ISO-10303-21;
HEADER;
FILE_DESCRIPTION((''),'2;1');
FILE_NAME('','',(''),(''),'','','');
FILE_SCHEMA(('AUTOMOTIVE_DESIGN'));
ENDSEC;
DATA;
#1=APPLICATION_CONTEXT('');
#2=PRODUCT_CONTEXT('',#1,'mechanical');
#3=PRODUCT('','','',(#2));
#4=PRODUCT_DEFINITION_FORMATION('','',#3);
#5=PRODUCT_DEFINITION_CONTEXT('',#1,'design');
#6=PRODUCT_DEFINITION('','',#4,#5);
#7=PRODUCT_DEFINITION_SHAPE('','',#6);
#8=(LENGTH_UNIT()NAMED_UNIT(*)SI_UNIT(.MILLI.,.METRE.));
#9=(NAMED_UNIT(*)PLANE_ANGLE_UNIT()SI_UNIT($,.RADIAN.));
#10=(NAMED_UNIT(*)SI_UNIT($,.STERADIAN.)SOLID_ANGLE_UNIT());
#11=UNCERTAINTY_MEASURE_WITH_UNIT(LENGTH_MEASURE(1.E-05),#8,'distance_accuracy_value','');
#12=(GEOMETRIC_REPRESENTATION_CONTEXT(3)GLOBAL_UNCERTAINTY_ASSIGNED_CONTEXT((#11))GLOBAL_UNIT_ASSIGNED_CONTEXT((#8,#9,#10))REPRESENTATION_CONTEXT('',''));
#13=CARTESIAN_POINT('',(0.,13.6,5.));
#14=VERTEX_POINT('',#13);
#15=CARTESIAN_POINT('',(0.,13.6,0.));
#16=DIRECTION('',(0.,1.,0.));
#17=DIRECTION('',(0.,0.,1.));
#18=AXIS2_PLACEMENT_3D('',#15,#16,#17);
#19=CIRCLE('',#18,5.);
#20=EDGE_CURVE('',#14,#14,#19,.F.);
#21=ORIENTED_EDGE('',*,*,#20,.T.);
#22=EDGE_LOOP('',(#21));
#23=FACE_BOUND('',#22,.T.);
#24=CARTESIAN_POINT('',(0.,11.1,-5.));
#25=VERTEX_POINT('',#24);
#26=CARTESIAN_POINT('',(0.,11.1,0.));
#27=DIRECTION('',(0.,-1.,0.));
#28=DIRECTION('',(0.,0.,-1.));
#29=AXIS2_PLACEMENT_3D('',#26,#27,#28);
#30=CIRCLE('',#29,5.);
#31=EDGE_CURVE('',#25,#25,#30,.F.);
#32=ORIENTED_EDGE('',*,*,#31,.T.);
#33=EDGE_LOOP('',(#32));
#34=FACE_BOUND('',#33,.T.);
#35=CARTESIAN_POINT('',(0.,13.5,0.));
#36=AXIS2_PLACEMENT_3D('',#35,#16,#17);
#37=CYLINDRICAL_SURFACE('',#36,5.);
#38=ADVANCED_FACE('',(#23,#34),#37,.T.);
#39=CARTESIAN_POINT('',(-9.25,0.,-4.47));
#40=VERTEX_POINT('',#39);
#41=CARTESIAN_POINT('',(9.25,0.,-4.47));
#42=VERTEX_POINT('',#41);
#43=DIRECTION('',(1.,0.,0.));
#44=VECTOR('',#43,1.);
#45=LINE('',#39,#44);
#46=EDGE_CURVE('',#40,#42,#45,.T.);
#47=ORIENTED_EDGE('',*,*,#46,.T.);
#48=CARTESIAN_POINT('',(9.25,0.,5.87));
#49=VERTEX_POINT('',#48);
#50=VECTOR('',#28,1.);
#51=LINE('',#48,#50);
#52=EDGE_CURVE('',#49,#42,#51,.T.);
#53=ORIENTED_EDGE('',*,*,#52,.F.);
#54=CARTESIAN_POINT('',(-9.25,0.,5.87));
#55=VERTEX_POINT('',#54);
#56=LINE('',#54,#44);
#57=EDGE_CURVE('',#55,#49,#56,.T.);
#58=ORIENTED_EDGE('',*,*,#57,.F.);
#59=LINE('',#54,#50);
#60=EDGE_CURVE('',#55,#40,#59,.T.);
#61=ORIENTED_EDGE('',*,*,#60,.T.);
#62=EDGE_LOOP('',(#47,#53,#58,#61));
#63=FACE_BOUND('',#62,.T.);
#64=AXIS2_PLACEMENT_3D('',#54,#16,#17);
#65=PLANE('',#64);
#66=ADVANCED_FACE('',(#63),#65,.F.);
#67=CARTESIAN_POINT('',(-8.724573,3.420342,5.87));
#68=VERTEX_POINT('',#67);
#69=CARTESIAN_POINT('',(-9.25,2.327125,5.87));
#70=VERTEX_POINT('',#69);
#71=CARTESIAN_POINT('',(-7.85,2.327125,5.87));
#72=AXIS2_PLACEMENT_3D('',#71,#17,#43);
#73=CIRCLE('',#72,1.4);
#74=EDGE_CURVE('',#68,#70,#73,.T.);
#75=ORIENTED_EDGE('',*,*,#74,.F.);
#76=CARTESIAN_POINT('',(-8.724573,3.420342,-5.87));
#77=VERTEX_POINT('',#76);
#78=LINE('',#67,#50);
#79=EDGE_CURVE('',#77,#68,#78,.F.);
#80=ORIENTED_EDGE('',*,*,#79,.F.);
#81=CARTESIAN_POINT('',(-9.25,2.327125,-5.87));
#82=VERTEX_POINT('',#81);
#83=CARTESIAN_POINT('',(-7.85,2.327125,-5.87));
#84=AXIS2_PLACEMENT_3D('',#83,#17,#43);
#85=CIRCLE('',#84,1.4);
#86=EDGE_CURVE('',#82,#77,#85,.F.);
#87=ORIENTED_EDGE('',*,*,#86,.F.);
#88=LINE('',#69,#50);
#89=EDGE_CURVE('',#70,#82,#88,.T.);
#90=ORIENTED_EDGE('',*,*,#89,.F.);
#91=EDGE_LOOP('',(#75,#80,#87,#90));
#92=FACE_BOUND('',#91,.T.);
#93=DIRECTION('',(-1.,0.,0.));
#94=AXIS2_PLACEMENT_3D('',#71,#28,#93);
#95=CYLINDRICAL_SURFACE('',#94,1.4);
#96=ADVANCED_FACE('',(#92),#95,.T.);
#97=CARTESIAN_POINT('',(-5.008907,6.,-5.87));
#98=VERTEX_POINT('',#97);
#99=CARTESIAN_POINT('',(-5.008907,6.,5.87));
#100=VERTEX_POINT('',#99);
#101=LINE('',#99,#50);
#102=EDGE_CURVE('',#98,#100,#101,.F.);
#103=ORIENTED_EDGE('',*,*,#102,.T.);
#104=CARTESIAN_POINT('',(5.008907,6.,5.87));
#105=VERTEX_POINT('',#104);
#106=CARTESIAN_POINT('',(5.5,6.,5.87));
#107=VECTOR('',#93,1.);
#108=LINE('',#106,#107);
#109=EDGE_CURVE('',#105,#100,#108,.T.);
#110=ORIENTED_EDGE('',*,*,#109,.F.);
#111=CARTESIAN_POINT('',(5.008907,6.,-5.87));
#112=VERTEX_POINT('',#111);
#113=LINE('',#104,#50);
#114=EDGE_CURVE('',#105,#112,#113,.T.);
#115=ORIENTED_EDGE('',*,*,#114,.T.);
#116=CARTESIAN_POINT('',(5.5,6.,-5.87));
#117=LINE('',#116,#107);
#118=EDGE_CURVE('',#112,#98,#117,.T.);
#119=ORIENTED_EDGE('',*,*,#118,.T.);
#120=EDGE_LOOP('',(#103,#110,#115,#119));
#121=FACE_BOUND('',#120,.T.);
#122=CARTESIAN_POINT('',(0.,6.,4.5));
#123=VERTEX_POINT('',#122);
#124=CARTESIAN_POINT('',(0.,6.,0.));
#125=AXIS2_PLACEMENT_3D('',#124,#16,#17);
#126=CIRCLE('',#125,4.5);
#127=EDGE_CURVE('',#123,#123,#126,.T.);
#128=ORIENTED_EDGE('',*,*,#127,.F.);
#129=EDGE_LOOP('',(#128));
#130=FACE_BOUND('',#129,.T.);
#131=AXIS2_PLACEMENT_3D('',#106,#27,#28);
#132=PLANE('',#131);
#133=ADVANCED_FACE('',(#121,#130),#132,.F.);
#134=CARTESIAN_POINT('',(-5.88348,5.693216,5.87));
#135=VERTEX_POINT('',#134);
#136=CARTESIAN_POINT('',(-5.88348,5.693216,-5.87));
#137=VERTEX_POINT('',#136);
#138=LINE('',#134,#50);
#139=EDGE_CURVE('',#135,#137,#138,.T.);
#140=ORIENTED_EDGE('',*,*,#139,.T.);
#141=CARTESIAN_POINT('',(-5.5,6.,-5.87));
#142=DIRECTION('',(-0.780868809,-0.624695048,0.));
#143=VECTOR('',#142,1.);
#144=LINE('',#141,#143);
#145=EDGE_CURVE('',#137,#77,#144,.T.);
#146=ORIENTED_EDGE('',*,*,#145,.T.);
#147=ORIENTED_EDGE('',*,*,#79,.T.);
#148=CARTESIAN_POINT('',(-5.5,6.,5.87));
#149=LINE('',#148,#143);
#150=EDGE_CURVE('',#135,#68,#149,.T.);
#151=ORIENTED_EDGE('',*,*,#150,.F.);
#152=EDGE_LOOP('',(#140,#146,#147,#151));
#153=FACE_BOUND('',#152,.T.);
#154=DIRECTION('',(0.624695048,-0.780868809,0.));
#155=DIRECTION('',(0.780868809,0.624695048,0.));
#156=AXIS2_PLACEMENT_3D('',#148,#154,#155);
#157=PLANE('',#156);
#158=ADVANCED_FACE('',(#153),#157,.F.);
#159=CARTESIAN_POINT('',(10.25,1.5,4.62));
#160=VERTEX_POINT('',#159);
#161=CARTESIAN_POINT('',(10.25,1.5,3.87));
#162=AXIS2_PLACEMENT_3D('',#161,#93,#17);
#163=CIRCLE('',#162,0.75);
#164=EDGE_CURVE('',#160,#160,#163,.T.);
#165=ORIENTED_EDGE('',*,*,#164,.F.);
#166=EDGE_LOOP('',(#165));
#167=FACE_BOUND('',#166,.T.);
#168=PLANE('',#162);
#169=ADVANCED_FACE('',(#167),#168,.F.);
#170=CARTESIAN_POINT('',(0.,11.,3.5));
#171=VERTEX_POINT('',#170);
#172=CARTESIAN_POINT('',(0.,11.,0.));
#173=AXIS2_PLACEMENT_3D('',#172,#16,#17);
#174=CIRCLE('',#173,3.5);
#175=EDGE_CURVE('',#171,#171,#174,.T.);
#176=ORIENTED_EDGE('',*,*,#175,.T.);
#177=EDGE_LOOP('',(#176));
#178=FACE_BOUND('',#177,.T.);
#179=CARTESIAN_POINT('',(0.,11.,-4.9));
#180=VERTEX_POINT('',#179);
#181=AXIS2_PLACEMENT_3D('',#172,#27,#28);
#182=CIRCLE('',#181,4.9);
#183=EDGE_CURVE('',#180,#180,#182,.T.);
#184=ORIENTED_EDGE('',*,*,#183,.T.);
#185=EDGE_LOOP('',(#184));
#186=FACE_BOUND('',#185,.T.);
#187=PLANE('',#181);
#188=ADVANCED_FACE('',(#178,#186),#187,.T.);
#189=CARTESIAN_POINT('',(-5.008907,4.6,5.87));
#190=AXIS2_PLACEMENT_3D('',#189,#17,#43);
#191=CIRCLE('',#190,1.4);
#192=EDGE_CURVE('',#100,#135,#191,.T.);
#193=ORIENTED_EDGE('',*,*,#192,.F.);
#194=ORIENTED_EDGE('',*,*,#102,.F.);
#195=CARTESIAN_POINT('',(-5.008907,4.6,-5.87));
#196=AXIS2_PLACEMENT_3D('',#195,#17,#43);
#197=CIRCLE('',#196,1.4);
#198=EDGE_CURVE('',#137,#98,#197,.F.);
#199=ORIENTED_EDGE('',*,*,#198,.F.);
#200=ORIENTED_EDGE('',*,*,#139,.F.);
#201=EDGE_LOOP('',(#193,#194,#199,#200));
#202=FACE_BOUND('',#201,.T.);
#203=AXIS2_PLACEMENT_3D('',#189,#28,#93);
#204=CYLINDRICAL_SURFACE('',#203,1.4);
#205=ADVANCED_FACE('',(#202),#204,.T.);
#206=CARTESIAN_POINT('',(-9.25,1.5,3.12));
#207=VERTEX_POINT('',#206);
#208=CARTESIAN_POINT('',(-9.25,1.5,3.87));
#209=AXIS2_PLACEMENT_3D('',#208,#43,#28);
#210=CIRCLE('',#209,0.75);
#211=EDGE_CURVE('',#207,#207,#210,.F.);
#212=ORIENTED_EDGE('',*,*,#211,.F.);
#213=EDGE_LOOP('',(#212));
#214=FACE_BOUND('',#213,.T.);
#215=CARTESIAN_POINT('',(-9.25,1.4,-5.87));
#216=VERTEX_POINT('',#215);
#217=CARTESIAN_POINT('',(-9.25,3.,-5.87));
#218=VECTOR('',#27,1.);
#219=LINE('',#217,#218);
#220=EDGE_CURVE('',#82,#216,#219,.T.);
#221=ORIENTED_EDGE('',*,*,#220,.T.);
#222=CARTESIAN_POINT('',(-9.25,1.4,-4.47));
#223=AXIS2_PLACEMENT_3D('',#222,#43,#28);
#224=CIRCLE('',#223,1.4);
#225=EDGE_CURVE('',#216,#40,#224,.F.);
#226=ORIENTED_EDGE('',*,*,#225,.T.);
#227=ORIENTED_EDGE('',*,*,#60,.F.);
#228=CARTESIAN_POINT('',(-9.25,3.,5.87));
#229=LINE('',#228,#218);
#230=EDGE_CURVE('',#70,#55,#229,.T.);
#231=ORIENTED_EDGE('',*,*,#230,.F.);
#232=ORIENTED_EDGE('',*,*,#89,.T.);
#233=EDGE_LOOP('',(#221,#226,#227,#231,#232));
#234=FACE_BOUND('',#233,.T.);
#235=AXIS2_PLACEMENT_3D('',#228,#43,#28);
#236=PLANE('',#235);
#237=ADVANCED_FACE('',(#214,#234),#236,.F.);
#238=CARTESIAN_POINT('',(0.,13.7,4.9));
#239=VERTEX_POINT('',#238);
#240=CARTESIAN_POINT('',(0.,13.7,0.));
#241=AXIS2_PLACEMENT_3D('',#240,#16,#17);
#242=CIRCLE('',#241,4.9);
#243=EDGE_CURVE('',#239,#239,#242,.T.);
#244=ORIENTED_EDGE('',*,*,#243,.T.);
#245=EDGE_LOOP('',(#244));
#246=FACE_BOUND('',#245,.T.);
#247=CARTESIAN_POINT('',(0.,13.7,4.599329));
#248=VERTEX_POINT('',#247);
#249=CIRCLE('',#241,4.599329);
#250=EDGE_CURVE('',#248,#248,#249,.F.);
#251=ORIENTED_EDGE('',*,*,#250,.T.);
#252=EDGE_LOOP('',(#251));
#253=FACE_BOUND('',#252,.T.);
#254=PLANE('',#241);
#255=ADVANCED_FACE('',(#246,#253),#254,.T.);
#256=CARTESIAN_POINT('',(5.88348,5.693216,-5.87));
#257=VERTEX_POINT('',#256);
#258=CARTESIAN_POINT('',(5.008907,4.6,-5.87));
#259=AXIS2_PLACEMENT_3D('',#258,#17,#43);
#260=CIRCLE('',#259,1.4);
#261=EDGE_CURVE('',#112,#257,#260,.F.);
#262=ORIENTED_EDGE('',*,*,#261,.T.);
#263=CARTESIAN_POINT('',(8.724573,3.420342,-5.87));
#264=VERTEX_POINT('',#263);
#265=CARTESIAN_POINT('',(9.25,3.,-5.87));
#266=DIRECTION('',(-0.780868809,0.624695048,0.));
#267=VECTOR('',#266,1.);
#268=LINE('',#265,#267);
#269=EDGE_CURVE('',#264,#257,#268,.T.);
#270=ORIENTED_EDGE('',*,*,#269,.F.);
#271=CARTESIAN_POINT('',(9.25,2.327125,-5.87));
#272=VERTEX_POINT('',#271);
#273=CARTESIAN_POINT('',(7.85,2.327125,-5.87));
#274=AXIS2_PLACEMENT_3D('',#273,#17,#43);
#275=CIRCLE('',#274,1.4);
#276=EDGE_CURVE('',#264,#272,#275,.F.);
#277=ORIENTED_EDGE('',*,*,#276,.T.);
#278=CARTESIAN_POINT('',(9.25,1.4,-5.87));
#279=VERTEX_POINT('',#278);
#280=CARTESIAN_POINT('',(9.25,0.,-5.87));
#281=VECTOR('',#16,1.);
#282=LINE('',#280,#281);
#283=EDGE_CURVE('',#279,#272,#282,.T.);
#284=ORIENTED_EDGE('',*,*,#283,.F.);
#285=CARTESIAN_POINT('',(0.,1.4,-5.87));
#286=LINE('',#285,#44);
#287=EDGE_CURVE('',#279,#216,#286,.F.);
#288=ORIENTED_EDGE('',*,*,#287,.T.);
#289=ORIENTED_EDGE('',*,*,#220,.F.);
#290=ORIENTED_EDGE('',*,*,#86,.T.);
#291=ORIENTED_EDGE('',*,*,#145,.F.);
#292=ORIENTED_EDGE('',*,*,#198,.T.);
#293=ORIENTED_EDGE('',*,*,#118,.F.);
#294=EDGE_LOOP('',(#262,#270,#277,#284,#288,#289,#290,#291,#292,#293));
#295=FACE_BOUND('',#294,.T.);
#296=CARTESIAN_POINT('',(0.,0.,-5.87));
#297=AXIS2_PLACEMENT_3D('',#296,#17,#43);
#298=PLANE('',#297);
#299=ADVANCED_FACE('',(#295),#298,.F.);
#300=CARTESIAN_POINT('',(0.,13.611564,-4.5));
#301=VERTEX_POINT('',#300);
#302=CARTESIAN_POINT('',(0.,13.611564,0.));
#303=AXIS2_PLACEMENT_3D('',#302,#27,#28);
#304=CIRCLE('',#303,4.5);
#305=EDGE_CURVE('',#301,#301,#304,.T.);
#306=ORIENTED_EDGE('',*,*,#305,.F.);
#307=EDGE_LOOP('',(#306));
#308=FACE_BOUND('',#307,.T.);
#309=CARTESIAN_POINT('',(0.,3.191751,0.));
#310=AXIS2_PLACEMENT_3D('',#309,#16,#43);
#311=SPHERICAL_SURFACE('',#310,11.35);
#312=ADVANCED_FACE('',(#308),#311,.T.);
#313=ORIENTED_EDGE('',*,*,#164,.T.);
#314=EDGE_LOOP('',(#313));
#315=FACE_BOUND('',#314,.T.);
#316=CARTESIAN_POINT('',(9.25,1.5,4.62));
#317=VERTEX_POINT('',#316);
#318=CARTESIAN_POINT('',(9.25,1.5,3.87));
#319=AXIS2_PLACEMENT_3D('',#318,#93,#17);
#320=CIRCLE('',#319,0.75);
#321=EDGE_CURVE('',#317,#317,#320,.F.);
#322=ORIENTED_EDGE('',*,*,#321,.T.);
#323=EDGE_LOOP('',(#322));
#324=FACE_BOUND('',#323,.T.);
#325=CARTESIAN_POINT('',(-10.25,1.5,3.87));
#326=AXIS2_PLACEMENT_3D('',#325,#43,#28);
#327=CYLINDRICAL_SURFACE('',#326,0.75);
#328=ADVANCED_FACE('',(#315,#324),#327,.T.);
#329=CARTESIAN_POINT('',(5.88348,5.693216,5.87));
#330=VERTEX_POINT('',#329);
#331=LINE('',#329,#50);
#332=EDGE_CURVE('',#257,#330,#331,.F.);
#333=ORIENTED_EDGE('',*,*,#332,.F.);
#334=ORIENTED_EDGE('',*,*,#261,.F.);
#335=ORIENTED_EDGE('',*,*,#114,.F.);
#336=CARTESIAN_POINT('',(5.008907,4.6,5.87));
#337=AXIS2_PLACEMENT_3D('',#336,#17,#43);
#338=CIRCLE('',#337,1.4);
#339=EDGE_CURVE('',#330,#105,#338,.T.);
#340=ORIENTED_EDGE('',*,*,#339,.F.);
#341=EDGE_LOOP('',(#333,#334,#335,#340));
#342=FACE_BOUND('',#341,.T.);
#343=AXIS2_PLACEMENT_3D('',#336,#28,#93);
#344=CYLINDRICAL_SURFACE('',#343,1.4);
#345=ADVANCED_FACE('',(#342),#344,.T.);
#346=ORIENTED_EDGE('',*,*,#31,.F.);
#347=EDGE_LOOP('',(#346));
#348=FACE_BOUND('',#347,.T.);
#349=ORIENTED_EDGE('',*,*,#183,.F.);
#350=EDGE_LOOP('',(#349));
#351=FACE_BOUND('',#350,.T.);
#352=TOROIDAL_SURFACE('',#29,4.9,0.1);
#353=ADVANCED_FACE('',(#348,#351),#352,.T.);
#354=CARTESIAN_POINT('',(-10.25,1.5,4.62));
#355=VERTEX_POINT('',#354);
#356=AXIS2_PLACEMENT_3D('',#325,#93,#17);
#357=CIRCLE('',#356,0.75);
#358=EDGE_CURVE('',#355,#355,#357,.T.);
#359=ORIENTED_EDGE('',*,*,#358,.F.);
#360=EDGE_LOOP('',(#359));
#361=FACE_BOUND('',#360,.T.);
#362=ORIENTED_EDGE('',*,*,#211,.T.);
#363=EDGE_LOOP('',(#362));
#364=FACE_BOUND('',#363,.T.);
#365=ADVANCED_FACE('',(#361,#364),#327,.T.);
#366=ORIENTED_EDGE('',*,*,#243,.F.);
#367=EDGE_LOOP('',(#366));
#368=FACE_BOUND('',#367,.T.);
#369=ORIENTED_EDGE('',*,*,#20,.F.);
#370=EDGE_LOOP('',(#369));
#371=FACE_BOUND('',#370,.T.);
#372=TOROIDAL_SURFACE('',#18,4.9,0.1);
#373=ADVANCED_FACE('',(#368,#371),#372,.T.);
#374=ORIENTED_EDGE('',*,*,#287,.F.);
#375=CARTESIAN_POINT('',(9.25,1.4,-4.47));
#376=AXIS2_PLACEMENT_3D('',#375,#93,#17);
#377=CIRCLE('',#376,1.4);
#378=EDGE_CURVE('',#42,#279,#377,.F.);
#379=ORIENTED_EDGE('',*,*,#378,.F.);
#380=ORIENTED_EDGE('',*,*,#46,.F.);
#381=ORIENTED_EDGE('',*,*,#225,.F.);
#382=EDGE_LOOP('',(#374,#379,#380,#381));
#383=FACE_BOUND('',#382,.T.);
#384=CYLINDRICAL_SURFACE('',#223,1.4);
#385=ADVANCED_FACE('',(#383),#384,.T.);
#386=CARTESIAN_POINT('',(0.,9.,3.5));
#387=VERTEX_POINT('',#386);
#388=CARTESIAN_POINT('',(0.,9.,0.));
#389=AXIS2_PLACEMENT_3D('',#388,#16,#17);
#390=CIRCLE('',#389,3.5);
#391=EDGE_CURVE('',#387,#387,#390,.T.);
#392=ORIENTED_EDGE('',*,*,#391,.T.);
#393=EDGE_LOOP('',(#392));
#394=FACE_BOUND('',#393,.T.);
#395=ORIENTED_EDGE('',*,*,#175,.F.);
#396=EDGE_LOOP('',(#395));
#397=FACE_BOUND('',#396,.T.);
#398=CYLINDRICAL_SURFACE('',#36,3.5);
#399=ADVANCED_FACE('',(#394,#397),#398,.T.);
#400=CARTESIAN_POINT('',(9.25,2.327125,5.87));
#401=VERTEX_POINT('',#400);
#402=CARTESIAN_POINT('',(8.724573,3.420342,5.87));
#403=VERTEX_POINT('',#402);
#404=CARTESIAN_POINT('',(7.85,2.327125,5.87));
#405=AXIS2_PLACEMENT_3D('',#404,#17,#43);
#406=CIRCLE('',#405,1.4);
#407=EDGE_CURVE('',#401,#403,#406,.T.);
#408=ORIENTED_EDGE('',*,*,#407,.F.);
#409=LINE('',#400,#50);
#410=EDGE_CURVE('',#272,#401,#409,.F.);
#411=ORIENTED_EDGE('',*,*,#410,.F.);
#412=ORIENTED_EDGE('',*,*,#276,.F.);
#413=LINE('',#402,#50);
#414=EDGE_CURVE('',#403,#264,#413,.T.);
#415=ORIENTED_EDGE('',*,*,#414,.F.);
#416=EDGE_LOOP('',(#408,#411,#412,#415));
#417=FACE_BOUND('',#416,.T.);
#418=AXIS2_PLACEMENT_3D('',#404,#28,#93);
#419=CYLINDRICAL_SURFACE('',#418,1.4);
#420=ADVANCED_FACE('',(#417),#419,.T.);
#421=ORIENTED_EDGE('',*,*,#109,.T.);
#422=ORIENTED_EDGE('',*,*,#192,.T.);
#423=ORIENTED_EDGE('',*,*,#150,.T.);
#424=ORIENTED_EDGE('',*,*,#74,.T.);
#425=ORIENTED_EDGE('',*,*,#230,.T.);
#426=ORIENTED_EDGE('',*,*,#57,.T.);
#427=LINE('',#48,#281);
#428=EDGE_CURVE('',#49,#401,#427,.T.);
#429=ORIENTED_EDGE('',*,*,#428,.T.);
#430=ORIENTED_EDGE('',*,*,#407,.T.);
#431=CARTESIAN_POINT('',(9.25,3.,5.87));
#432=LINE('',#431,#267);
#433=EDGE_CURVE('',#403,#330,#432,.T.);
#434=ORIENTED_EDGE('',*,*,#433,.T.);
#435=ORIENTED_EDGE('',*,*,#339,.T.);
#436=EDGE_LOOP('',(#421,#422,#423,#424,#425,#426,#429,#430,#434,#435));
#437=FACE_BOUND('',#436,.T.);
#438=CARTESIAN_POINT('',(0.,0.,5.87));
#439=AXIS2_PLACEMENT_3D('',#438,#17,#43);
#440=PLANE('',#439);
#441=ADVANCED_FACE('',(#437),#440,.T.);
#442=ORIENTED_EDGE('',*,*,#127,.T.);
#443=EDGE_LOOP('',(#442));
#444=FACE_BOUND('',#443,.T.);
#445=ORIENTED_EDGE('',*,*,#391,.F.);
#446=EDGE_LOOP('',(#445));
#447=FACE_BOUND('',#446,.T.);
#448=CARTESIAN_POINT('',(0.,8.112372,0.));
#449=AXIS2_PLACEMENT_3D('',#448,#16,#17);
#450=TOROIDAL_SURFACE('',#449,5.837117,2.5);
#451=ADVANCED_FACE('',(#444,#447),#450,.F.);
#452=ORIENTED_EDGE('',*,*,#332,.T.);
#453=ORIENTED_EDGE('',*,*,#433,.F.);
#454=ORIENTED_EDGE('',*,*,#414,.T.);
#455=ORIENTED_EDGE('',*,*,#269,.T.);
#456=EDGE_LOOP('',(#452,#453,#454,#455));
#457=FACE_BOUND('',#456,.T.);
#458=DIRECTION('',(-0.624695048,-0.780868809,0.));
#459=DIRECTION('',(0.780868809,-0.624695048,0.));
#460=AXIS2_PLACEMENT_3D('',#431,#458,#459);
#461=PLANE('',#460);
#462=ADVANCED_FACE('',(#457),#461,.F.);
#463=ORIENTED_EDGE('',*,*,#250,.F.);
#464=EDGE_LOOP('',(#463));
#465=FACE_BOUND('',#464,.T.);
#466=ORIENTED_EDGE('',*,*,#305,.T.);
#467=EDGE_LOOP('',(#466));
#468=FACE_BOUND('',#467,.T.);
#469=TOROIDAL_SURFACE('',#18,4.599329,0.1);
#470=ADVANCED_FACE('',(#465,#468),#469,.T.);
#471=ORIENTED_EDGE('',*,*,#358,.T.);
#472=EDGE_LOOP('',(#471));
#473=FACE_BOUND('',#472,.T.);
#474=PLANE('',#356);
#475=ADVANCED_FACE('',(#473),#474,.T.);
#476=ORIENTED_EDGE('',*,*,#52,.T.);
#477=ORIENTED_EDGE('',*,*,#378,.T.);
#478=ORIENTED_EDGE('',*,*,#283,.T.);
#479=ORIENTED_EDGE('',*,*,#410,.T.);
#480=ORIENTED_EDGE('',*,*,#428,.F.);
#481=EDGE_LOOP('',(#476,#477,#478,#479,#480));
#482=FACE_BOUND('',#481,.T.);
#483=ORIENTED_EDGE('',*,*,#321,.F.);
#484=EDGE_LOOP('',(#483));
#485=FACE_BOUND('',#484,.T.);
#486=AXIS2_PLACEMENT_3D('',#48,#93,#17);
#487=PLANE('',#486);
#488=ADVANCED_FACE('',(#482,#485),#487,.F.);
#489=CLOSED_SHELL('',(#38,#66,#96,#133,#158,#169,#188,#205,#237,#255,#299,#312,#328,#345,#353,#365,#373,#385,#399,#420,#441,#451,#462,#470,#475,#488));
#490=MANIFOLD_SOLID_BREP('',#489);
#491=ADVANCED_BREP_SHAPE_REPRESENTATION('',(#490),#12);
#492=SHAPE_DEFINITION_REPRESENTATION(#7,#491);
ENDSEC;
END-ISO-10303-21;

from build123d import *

# Parameters (mm, degrees)
BOSS_EXTRUDE1_DEPTH = 5.87
SKETCH6_R           = 0.75
BOSS_EXTRUDE2_DEPTH = 10.25
FILLET1_R           = 0.1
FILLET2_R           = 1.4
FILLET3_R           = 1.4


with BuildPart() as part:
    # Sketch1 → Boss-Extrude1 (new, symmetric)
    with BuildSketch(Plane.XY):
        Polygon((-9.25, 0), (9.25, 0), (9.25, 3), (5.5, 6), (-5.5, 6), (-9.25, 3), align=None)
    extrude(amount=BOSS_EXTRUDE1_DEPTH, both=True)

    # Sketch2 → Revolve5 (revolve)
    with BuildSketch(Plane.XY, mode=Mode.PRIVATE) as revolve5_sk:
        with BuildLine():
            ThreePointArc((3.5, 9), (3.465409062, 7.321803021), (4.5, 6))
            Line((4.5, 6), (0, 6))
            Line((0, 6), (0, 13.5))
            Line((0, 13.5), (4.5, 13.5))
            Line((4.5, 13.5), (4.5, 13.7))
            Line((4.5, 13.7), (5, 13.7))
            Line((5, 13.7), (5, 11))
            Line((5, 11), (3.5, 11))
            Line((3.5, 11), (3.5, 9))
        make_face()
    revolve(revolve5_sk.sketch.rotate(Axis((0, 13.5, 0), (0, -1, 0)), 90), axis=Axis((0, 13.5, 0), (0, -1, 0)))

    # Sketch3 → Revolve6 (revolve)
    with BuildSketch(Plane.XY, mode=Mode.PRIVATE) as revolve6_sk:
        with BuildLine():
            Line((0, 13.5), (0, 14.541750876))
            ThreePointArc((0, 14.541750876), (2.431447351, 14.278254553), (4.75, 13.5))
            Line((4.75, 13.5), (0, 13.5))
        make_face()
    revolve(revolve6_sk.sketch.rotate(Axis((0, 20.298095722, 0), (0, -1, 0)), 90), axis=Axis((0, 20.298095722, 0), (0, -1, 0)))

    # Sketch6 → Boss-Extrude2 (add, symmetric)
    with BuildSketch(Plane.ZY):
        with Locations((3.87, 1.5)):
            Circle(SKETCH6_R)
    extrude(amount=BOSS_EXTRUDE2_DEPTH, both=True)

    # Fillet1
    # the kernel refuses this fillet: 0.1 mm, written as the material it takes off along each edge
    with BuildSketch(Plane(origin=(0, 11, 0), x_dir=(0, 0, 1), z_dir=(1, 0, 0))) as fillet1_piece_1:
        with BuildLine():
            CenterArc((5 - FILLET1_R, -FILLET1_R), FILLET1_R, 0, 90)
            Line((5, -FILLET1_R), (5, 0))
            Line((5, 0), (5 - FILLET1_R, 0))
        make_face()
    revolve(axis=Axis((0, 11, 0), (0, -1, 0)), mode=Mode.SUBTRACT)
    with BuildSketch(Plane(origin=(0, 13.7, 0), x_dir=(0, 0, 1), z_dir=(1, 0, 0))) as fillet1_piece_2:
        with BuildLine():
            CenterArc((5 - FILLET1_R, FILLET1_R), FILLET1_R, 270, 90)
            Line((5 - FILLET1_R, 0), (5, 0))
            Line((5, 0), (5, FILLET1_R))
        make_face()
    revolve(axis=Axis((0, 13.7, 0), (0, -1, 0)), mode=Mode.SUBTRACT)
    with BuildSketch(Plane(origin=(0, 13.7, 0), x_dir=(0, 0, 1), z_dir=(1, 0, 0))) as fillet1_piece_3:
        with BuildLine():
            CenterArc((4.59932915, 0.1), FILLET1_R, 186.640387385, 83.359612615)
            Line((4.5, 0.088436266), (4.5, 0))
            Line((4.5, 0), (4.59932915, 0))
        make_face()
    revolve(axis=Axis((0, 13.7, 0), (0, -1, 0)), mode=Mode.SUBTRACT)

    # Fillet2
    fillet2_edges = [part.edges().sort_by_distance(p)[0] for p in [
        (-9.25, 3, 0),
        (-5.5, 6, 0),
        (9.25, 3, 0),
        (0, 0, -5.87),
    ]]
    fillet(fillet2_edges, radius=FILLET2_R)

    # Fillet3
    fillet3_edges = [part.edges().sort_by_distance(p)[0] for p in [
        (5.5, 6, 0),
    ]]
    fillet(fillet3_edges, radius=FILLET3_R)


solid = part.part
